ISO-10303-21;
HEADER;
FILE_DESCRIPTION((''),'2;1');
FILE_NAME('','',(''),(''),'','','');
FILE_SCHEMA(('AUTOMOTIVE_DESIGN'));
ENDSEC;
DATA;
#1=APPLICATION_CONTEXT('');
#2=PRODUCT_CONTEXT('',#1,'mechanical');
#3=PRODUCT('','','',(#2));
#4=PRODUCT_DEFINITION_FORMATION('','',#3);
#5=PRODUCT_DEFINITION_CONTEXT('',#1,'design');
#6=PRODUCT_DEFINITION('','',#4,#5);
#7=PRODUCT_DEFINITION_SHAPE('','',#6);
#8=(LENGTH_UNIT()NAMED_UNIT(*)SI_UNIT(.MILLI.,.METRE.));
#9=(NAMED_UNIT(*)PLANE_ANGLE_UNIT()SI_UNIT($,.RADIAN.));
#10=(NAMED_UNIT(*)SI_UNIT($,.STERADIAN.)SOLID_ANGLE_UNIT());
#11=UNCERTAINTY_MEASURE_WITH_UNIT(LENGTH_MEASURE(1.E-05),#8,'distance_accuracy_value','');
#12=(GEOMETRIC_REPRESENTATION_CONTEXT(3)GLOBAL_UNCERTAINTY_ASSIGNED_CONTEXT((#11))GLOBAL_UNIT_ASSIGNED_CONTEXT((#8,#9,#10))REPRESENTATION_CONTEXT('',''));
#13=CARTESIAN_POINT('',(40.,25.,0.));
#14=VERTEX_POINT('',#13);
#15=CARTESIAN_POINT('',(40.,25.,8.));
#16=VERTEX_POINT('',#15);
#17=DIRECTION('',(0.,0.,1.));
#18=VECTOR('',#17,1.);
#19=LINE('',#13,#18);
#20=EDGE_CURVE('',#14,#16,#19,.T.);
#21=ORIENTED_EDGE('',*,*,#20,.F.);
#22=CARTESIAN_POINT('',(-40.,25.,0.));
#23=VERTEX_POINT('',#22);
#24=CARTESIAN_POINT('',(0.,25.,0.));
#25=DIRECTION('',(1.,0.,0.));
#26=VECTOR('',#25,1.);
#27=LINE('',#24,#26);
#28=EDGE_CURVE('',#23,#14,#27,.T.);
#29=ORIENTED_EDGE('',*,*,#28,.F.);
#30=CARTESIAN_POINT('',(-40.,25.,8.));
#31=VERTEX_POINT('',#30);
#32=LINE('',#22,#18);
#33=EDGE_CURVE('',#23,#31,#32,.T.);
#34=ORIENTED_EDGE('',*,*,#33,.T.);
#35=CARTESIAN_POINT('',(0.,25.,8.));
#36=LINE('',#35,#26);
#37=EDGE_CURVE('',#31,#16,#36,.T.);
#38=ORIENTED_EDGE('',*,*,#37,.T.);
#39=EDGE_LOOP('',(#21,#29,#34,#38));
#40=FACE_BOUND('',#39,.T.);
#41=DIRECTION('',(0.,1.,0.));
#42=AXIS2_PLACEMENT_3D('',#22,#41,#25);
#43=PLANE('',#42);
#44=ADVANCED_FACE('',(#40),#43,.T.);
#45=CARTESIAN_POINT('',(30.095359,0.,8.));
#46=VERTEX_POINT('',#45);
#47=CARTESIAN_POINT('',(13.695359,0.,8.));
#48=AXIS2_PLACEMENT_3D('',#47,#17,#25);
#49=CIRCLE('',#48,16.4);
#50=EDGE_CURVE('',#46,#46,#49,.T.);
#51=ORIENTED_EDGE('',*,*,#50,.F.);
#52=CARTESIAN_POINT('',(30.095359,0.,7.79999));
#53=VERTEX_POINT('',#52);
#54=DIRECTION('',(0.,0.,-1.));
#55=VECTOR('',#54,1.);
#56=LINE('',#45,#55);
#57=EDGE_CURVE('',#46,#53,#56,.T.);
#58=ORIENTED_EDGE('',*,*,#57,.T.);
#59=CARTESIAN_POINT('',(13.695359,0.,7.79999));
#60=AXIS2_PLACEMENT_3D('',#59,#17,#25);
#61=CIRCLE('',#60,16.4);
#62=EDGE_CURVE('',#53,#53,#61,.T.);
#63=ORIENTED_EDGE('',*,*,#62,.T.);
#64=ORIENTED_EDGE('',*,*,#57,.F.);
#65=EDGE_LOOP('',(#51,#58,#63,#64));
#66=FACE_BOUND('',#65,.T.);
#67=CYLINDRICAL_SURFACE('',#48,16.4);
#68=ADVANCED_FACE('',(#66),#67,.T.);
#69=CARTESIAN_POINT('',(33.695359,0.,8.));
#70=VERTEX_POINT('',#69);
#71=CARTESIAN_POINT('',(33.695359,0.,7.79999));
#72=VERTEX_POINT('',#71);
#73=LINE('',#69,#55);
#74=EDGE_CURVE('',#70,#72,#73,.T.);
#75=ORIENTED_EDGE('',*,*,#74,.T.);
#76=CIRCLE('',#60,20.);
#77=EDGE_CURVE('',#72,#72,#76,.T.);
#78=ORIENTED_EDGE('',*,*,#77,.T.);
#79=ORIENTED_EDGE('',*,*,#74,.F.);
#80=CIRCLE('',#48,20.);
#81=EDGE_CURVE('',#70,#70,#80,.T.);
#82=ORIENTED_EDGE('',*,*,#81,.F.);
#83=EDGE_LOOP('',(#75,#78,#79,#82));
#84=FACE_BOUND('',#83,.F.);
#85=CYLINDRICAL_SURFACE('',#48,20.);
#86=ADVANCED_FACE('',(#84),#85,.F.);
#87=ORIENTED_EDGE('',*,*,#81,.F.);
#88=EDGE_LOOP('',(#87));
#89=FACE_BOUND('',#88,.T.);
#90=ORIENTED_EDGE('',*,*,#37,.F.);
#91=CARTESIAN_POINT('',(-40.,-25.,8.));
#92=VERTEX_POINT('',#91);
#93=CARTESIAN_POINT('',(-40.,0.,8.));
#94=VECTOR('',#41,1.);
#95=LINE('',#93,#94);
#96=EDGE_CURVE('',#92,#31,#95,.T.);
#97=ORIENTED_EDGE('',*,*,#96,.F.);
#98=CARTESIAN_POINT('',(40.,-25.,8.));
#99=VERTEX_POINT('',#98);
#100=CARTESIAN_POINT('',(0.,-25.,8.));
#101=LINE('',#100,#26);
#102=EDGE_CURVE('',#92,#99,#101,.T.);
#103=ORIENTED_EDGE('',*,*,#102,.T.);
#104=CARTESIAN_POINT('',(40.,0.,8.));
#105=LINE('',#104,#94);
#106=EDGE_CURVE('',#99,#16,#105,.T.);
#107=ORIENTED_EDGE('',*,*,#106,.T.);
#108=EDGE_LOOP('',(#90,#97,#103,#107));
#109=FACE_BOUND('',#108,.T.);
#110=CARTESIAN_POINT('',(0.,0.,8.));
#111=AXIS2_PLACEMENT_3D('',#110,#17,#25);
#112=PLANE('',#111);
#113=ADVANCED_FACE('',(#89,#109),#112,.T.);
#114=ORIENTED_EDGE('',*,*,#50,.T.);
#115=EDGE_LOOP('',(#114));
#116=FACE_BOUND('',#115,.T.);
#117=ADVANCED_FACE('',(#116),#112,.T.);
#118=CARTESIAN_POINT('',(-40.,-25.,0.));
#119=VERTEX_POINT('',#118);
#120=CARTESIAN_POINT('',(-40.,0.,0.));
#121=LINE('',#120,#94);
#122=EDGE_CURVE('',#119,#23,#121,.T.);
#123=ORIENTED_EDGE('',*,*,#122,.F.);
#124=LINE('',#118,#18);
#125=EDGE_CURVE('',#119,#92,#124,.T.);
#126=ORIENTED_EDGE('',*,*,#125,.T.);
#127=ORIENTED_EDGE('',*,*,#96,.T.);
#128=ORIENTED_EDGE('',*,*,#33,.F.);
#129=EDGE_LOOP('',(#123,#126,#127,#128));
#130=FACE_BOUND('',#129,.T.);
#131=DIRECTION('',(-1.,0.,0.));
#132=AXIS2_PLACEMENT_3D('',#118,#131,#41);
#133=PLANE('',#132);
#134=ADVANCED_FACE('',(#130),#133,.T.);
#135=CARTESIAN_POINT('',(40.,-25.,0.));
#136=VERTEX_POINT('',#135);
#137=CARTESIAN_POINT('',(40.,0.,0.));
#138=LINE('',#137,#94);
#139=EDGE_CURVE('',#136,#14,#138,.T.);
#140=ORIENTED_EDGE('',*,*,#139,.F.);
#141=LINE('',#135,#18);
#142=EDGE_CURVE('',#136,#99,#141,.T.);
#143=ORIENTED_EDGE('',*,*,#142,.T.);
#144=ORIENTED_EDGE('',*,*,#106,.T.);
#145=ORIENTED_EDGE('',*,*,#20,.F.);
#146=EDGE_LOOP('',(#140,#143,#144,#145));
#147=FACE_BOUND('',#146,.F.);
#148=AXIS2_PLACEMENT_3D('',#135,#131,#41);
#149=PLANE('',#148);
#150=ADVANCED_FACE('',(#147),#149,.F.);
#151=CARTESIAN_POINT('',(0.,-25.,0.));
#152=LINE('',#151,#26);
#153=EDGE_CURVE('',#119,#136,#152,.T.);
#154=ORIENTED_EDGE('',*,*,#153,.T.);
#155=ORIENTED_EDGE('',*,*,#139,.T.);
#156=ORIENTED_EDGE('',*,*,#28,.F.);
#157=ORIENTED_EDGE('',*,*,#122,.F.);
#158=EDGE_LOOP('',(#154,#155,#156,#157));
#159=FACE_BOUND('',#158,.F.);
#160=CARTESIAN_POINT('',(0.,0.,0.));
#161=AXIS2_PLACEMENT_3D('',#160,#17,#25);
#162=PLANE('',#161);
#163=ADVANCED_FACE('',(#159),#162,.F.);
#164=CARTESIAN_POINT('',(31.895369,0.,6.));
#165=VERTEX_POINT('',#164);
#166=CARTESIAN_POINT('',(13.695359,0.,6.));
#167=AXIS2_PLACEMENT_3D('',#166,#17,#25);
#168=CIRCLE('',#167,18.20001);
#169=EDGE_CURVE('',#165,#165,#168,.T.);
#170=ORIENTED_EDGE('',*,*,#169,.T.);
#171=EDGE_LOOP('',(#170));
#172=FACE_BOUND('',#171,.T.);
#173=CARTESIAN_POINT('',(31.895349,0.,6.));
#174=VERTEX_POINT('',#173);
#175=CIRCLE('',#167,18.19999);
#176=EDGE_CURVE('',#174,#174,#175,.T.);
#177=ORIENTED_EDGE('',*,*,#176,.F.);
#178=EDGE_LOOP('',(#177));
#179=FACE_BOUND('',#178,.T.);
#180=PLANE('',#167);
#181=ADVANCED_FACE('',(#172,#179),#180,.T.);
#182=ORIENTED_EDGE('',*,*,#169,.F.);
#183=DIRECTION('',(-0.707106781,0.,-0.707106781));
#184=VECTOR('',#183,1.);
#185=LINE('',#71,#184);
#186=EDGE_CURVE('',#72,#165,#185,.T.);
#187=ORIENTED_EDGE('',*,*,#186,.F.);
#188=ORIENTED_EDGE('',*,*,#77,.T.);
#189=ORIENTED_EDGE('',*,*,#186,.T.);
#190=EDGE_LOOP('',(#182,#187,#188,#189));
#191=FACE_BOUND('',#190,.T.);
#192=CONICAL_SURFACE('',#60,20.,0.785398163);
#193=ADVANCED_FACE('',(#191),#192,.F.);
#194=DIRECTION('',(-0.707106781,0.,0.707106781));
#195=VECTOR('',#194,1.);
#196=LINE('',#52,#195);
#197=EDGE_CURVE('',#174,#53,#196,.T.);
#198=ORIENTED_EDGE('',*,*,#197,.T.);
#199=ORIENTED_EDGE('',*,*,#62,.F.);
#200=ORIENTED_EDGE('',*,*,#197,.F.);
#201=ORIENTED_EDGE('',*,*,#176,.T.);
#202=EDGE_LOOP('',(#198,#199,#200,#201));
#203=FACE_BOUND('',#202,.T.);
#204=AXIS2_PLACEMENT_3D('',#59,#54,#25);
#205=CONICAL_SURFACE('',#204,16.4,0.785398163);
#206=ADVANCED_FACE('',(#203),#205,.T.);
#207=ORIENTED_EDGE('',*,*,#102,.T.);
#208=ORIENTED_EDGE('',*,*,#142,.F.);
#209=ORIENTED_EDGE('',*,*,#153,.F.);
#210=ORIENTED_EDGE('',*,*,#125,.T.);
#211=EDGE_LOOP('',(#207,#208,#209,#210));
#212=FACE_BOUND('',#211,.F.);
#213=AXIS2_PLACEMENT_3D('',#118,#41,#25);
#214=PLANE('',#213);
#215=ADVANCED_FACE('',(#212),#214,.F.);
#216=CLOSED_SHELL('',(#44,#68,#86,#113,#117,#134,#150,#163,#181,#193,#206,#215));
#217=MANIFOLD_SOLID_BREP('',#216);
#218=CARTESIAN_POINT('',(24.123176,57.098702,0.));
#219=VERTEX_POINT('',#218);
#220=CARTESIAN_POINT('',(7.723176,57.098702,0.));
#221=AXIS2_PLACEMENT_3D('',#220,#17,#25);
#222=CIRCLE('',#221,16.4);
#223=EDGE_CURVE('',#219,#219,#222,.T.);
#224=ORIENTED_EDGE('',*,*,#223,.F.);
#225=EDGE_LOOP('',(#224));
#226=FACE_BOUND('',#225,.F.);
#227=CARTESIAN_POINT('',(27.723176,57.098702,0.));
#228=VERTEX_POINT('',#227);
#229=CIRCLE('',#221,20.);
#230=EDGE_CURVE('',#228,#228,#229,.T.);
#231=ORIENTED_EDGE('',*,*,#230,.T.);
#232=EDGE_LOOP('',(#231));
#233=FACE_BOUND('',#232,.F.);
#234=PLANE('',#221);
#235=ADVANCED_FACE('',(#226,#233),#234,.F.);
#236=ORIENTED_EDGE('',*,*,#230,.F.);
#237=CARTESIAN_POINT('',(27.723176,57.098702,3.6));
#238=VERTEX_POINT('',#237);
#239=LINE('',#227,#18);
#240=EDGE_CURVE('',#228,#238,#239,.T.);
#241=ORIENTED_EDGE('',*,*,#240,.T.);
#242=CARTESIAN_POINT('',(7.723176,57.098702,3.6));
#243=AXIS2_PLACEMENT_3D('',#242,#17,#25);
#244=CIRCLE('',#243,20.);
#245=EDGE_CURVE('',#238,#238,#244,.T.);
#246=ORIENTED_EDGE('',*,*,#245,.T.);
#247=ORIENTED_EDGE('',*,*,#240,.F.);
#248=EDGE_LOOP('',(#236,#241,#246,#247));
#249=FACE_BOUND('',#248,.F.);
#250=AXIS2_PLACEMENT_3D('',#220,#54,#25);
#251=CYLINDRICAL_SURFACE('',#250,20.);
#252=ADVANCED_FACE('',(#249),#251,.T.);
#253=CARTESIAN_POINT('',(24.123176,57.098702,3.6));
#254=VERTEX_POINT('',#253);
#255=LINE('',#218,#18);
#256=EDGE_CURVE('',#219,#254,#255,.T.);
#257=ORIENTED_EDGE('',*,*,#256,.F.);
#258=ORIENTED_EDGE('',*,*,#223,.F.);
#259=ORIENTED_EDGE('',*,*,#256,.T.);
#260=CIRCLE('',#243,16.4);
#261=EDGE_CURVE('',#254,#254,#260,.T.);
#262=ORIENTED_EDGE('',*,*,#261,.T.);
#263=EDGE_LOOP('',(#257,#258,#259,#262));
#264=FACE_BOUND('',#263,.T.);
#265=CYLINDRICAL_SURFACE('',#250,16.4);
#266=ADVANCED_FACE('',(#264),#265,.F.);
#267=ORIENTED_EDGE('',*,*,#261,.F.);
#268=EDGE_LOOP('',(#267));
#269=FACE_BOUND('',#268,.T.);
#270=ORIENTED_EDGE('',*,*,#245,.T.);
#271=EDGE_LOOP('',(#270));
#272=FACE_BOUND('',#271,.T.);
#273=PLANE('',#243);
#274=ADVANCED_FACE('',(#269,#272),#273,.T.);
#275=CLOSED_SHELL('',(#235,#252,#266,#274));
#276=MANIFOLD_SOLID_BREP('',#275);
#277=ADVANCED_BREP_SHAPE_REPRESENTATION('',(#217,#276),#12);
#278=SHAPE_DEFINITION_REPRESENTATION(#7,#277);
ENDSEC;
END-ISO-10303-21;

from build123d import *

# Parameters (mm, degrees)
F0_W     = 80
F0_H     = 50
F1_DEPTH = 8
F2_R     = 20
F2_R_2   = 16.4
F3_DEPTH = 3.6
F4_R     = 20
F4_R_2   = 16.4
F5_DEPTH = 2
F6_SIZE  = 1.79999


# Not quite as in the source:
# - a fillet or chamfer is up to 0.001 mm smaller than in the source, because OpenCascade refuses the exact size


with BuildPart() as f1:
    # F0 (on Top) → F1 (new body)
    with BuildSketch(Plane.XY):
        Rectangle(F0_W, F0_H)
    extrude(amount=F1_DEPTH)

    # F4 (on face) → F5 (cut)
    with BuildSketch(Plane.XY.offset(8)):
        with Locations((13.69535923, 0)):
            Circle(F4_R)
        with Locations((13.69535923, 0)):
            Circle(F4_R_2, mode=Mode.SUBTRACT)
    extrude(amount=-F5_DEPTH, mode=Mode.SUBTRACT)

    # F6 (size 1.8 in the source; OpenCascade refuses exactly that, so slightly less here)
    f6_edges = [f1.edges().sort_by_distance(p)[0] for p in [
        (-6.304641, 0, 6),
        (-2.704641, 0, 6),
    ]]
    chamfer(f6_edges, length=F6_SIZE)


with BuildPart() as f3:
    # F2 (on Top) → F3 (new body)
    with BuildSketch(Plane.XY):
        with Locations((7.7231763862, 57.0987015963)):
            Circle(F2_R)
        with Locations((7.7231763862, 57.0987015963)):
            Circle(F2_R_2, mode=Mode.SUBTRACT)
    extrude(amount=F3_DEPTH)


solid = Compound([f1.part, f3.part])
